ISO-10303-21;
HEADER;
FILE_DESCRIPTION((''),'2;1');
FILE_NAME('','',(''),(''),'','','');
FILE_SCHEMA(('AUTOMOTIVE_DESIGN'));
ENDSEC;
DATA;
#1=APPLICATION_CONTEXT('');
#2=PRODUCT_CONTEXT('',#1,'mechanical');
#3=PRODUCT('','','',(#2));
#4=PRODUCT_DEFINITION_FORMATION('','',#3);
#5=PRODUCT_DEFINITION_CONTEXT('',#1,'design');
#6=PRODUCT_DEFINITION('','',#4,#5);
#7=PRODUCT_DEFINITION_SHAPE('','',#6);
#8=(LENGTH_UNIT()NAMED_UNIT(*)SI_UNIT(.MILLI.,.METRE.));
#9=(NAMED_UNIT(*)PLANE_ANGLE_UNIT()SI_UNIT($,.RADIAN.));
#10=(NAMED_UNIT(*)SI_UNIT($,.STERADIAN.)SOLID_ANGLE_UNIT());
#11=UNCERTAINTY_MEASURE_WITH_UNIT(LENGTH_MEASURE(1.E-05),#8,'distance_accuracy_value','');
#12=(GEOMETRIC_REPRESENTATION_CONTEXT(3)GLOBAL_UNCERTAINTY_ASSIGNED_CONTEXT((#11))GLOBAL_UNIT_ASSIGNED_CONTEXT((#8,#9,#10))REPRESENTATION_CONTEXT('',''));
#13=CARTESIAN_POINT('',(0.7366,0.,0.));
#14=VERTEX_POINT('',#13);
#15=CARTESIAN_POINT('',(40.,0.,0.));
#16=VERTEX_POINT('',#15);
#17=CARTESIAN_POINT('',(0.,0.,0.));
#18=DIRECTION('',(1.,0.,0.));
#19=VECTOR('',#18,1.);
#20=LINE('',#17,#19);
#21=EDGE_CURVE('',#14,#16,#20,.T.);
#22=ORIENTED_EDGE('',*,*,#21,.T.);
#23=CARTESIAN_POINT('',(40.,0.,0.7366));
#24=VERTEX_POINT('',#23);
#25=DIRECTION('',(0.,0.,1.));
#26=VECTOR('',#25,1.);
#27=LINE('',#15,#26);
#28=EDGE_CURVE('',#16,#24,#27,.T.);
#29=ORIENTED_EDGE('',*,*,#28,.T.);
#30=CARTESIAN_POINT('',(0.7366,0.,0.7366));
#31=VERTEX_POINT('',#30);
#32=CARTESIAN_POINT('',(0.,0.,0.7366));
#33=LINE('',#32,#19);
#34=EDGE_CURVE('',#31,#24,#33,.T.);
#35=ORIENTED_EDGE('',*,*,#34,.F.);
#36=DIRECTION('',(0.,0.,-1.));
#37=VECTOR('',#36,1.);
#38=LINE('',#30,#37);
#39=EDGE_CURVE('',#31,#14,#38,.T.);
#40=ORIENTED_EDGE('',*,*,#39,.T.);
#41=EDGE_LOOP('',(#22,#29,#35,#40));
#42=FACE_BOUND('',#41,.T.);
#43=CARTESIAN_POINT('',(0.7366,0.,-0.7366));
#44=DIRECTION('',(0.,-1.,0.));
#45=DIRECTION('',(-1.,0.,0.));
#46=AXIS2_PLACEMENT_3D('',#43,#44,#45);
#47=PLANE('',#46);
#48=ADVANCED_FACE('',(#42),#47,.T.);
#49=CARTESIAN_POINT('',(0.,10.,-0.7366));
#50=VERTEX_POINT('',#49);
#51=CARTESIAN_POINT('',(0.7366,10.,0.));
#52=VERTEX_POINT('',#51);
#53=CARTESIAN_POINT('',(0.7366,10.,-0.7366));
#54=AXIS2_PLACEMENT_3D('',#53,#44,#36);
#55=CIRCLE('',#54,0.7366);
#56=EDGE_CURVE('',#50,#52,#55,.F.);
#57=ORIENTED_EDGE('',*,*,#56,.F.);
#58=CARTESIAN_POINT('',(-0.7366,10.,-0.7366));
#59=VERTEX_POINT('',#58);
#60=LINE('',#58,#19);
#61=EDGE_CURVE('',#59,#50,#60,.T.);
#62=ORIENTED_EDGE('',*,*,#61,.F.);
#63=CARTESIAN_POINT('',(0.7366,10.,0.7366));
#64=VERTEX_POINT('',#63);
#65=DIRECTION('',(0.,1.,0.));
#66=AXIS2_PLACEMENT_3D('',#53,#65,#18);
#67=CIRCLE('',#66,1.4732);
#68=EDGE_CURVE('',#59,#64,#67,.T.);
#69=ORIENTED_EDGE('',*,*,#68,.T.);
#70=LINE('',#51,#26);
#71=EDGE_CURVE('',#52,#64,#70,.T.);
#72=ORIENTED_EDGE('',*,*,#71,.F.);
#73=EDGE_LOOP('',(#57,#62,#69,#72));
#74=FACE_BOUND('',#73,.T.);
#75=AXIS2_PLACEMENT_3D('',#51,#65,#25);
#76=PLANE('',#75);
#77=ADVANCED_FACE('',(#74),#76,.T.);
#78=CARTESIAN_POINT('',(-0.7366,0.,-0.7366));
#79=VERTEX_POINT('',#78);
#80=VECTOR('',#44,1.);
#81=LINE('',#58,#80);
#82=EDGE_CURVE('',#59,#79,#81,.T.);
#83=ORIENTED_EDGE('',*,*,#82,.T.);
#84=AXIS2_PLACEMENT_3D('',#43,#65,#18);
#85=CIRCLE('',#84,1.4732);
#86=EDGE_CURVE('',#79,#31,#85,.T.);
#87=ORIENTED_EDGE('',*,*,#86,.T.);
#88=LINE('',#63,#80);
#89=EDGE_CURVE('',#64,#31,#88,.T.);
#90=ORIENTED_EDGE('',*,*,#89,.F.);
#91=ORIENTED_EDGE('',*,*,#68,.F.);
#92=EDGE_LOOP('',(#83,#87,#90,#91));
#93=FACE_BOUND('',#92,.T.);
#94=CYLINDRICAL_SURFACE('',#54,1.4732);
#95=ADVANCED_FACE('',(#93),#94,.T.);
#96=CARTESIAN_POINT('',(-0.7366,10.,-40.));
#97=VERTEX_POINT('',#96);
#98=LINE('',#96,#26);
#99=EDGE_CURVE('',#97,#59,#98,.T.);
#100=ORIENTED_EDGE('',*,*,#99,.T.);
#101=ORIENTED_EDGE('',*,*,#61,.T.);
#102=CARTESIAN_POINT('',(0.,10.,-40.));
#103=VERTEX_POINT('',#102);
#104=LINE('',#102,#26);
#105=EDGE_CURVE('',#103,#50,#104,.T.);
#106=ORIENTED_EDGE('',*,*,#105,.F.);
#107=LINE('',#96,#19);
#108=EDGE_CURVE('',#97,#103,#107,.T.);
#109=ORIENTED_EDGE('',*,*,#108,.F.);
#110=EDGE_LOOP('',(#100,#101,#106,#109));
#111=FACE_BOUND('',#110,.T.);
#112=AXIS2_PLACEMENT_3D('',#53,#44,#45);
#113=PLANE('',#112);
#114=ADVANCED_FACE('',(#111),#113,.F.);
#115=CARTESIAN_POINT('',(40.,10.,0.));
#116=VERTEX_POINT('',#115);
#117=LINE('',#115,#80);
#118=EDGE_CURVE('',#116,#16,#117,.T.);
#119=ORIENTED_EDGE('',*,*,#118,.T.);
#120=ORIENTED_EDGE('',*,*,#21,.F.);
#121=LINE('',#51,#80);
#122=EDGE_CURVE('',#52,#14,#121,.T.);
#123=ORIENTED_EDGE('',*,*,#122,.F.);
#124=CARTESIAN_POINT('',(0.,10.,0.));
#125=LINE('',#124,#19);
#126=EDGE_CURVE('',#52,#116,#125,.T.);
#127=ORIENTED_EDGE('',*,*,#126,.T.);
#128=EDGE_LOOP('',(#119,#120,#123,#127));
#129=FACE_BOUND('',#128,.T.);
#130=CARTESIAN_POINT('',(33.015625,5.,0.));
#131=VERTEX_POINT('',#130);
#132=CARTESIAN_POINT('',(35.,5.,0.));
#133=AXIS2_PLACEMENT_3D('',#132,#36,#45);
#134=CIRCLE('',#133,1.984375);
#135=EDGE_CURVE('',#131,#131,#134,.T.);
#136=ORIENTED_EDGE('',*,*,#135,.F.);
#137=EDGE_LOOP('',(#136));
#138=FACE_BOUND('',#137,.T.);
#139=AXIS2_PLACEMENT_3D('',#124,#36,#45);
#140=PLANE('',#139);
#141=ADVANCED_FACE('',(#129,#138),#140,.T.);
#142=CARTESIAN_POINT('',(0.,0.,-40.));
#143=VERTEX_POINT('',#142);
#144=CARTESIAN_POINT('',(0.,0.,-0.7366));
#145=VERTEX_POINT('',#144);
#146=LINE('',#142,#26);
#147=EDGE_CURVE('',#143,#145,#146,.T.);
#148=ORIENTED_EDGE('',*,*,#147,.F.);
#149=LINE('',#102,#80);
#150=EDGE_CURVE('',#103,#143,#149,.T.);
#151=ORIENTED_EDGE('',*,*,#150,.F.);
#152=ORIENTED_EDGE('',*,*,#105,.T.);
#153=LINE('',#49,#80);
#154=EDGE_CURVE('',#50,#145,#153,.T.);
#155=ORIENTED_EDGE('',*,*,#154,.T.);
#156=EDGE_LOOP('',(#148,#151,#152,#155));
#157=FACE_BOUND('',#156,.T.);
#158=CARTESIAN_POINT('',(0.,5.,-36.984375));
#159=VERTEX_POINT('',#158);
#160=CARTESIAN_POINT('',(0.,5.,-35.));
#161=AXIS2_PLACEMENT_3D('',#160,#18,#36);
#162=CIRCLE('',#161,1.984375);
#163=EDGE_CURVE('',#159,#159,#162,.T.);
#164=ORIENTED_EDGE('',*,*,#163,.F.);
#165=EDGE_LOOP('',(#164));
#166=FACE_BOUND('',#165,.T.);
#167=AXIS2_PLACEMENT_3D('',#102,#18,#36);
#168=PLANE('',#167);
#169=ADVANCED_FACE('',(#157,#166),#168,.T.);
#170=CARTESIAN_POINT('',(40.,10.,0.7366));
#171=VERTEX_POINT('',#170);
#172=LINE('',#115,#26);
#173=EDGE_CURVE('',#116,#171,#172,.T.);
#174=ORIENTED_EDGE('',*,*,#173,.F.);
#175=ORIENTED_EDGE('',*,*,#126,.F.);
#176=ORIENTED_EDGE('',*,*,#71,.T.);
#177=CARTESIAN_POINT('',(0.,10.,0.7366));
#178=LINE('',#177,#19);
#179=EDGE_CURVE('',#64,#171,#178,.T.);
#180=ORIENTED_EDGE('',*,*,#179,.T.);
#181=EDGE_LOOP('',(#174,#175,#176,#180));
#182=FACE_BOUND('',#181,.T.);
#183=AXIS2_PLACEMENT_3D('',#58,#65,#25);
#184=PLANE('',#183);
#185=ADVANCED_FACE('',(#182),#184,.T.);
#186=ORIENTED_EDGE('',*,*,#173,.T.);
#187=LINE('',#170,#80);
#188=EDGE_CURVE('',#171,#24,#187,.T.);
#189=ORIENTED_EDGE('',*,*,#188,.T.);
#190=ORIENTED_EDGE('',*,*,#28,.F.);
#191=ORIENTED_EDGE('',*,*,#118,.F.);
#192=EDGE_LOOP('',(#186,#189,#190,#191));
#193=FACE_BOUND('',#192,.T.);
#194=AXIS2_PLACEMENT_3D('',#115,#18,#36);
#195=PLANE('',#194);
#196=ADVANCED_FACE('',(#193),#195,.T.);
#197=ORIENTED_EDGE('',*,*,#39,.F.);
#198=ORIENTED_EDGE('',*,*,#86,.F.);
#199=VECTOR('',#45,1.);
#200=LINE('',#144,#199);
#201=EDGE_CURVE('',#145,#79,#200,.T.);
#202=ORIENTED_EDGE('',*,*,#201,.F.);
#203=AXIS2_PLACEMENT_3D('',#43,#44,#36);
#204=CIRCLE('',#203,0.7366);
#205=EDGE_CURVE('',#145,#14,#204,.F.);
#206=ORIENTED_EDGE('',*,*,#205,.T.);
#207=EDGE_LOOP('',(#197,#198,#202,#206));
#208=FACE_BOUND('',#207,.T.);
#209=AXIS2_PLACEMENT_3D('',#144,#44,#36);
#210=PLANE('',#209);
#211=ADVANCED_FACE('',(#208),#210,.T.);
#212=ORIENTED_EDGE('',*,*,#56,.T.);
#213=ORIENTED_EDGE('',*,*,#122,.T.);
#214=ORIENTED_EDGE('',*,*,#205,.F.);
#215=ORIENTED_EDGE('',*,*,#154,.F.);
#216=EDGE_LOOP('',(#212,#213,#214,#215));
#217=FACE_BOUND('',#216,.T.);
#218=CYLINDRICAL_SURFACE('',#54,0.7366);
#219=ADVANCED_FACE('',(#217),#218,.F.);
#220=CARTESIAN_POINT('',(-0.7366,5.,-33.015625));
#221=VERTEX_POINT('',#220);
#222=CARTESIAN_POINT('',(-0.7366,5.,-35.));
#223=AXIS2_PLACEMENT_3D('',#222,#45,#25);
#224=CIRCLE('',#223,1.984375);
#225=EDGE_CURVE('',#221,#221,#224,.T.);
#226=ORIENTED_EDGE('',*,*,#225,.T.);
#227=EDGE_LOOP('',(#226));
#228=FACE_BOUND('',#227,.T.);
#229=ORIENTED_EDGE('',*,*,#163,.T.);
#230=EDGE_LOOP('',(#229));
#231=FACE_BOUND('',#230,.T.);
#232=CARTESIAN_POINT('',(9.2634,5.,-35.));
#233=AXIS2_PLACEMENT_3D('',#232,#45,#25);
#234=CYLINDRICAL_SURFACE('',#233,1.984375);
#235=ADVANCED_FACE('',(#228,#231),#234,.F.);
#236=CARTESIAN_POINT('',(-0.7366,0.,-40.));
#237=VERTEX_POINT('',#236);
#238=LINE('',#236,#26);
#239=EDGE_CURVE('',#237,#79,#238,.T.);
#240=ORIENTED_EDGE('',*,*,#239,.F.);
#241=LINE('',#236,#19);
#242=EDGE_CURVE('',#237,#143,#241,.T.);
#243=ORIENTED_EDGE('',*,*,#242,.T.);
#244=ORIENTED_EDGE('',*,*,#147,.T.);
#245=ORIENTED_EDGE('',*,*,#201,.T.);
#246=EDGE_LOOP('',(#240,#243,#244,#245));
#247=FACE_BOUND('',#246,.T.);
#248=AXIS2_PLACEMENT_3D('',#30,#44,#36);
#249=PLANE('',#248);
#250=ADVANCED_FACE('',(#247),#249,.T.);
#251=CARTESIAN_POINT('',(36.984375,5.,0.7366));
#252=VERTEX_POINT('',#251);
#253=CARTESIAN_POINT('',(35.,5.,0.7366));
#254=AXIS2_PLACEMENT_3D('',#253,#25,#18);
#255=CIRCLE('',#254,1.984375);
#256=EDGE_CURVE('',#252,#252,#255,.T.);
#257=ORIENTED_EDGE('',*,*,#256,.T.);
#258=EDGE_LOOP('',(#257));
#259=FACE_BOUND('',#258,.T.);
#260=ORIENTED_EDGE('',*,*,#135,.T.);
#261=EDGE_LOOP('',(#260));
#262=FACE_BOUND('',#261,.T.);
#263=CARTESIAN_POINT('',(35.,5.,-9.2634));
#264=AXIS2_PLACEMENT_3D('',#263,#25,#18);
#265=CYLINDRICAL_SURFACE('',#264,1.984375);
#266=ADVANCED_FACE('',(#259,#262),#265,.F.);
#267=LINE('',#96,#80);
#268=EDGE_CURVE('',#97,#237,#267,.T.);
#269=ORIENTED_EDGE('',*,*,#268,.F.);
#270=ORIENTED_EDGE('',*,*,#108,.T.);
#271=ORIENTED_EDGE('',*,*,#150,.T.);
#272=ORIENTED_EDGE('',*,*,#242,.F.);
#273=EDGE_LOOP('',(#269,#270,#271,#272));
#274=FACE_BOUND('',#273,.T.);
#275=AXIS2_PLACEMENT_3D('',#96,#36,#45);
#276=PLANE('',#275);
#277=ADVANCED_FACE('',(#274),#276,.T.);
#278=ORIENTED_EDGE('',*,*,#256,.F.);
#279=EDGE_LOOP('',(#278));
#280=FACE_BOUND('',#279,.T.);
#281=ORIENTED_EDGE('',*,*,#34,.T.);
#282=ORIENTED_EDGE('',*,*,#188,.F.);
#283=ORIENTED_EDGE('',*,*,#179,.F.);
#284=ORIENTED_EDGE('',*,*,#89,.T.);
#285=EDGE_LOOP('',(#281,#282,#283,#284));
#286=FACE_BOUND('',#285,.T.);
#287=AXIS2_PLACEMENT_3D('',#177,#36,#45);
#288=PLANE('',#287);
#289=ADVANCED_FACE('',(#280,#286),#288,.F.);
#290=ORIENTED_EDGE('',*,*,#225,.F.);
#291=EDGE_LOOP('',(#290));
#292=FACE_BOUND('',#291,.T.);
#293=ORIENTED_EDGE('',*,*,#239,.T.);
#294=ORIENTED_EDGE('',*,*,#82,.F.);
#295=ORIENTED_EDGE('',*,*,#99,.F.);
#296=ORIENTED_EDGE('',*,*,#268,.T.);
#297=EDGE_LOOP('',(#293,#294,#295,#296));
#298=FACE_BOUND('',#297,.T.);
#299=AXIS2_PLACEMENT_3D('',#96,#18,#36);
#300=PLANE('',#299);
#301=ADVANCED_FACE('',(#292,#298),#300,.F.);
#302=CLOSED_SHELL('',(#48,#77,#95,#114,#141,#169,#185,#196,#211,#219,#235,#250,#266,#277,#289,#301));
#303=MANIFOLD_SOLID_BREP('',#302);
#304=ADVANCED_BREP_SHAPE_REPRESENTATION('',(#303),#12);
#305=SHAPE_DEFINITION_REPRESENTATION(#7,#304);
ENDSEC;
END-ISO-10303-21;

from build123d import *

# Parameters (mm, degrees)
BASE_FLANGE1_DEPTH = 10
SKETCH6_R          = 1.984375
CUT_EXTRUDE1_DEPTH = 10
SKETCH7_R          = 1.984375
CUT_EXTRUDE2_DEPTH = 10


# Sheet-metal steps are written as plain solids
with BuildPart() as part:
    # Sketch1 → Base-Flange1 (new body)
    with BuildSketch(Plane(origin=(0, 0, 0), x_dir=(1, 0, 0), z_dir=(0, 1, 0))):
        with BuildLine():
            Line((0, 40), (0, 0.7366))
            ThreePointArc((0, 0.7366), (0.215745145, 0.215745145), (0.7366, 0))
            Line((0.7366, 0), (40, 0))
            Line((40, 0), (40, -0.7366))
            Line((40, -0.7366), (0.7366, -0.7366))
            ThreePointArc((0.7366, -0.7366), (-0.30510971, -0.30510971), (-0.7366, 0.7366))
            Line((-0.7366, 0.7366), (-0.7366, 40))
            Line((-0.7366, 40), (0, 40))
        make_face()
    extrude(amount=BASE_FLANGE1_DEPTH)

    # Sketch6 → Cut-Extrude1 (cut)
    with BuildSketch(Plane.XY.offset(0.7366)):
        with Locations((35, 5)):
            Circle(SKETCH6_R)
    extrude(amount=-CUT_EXTRUDE1_DEPTH, mode=Mode.SUBTRACT)

    # Sketch7 → Cut-Extrude2 (cut)
    with BuildSketch(Plane.ZY.offset(0.7366)):
        with Locations((-35, 5)):
            Circle(SKETCH7_R)
    extrude(amount=-CUT_EXTRUDE2_DEPTH, mode=Mode.SUBTRACT)


solid = part.part
